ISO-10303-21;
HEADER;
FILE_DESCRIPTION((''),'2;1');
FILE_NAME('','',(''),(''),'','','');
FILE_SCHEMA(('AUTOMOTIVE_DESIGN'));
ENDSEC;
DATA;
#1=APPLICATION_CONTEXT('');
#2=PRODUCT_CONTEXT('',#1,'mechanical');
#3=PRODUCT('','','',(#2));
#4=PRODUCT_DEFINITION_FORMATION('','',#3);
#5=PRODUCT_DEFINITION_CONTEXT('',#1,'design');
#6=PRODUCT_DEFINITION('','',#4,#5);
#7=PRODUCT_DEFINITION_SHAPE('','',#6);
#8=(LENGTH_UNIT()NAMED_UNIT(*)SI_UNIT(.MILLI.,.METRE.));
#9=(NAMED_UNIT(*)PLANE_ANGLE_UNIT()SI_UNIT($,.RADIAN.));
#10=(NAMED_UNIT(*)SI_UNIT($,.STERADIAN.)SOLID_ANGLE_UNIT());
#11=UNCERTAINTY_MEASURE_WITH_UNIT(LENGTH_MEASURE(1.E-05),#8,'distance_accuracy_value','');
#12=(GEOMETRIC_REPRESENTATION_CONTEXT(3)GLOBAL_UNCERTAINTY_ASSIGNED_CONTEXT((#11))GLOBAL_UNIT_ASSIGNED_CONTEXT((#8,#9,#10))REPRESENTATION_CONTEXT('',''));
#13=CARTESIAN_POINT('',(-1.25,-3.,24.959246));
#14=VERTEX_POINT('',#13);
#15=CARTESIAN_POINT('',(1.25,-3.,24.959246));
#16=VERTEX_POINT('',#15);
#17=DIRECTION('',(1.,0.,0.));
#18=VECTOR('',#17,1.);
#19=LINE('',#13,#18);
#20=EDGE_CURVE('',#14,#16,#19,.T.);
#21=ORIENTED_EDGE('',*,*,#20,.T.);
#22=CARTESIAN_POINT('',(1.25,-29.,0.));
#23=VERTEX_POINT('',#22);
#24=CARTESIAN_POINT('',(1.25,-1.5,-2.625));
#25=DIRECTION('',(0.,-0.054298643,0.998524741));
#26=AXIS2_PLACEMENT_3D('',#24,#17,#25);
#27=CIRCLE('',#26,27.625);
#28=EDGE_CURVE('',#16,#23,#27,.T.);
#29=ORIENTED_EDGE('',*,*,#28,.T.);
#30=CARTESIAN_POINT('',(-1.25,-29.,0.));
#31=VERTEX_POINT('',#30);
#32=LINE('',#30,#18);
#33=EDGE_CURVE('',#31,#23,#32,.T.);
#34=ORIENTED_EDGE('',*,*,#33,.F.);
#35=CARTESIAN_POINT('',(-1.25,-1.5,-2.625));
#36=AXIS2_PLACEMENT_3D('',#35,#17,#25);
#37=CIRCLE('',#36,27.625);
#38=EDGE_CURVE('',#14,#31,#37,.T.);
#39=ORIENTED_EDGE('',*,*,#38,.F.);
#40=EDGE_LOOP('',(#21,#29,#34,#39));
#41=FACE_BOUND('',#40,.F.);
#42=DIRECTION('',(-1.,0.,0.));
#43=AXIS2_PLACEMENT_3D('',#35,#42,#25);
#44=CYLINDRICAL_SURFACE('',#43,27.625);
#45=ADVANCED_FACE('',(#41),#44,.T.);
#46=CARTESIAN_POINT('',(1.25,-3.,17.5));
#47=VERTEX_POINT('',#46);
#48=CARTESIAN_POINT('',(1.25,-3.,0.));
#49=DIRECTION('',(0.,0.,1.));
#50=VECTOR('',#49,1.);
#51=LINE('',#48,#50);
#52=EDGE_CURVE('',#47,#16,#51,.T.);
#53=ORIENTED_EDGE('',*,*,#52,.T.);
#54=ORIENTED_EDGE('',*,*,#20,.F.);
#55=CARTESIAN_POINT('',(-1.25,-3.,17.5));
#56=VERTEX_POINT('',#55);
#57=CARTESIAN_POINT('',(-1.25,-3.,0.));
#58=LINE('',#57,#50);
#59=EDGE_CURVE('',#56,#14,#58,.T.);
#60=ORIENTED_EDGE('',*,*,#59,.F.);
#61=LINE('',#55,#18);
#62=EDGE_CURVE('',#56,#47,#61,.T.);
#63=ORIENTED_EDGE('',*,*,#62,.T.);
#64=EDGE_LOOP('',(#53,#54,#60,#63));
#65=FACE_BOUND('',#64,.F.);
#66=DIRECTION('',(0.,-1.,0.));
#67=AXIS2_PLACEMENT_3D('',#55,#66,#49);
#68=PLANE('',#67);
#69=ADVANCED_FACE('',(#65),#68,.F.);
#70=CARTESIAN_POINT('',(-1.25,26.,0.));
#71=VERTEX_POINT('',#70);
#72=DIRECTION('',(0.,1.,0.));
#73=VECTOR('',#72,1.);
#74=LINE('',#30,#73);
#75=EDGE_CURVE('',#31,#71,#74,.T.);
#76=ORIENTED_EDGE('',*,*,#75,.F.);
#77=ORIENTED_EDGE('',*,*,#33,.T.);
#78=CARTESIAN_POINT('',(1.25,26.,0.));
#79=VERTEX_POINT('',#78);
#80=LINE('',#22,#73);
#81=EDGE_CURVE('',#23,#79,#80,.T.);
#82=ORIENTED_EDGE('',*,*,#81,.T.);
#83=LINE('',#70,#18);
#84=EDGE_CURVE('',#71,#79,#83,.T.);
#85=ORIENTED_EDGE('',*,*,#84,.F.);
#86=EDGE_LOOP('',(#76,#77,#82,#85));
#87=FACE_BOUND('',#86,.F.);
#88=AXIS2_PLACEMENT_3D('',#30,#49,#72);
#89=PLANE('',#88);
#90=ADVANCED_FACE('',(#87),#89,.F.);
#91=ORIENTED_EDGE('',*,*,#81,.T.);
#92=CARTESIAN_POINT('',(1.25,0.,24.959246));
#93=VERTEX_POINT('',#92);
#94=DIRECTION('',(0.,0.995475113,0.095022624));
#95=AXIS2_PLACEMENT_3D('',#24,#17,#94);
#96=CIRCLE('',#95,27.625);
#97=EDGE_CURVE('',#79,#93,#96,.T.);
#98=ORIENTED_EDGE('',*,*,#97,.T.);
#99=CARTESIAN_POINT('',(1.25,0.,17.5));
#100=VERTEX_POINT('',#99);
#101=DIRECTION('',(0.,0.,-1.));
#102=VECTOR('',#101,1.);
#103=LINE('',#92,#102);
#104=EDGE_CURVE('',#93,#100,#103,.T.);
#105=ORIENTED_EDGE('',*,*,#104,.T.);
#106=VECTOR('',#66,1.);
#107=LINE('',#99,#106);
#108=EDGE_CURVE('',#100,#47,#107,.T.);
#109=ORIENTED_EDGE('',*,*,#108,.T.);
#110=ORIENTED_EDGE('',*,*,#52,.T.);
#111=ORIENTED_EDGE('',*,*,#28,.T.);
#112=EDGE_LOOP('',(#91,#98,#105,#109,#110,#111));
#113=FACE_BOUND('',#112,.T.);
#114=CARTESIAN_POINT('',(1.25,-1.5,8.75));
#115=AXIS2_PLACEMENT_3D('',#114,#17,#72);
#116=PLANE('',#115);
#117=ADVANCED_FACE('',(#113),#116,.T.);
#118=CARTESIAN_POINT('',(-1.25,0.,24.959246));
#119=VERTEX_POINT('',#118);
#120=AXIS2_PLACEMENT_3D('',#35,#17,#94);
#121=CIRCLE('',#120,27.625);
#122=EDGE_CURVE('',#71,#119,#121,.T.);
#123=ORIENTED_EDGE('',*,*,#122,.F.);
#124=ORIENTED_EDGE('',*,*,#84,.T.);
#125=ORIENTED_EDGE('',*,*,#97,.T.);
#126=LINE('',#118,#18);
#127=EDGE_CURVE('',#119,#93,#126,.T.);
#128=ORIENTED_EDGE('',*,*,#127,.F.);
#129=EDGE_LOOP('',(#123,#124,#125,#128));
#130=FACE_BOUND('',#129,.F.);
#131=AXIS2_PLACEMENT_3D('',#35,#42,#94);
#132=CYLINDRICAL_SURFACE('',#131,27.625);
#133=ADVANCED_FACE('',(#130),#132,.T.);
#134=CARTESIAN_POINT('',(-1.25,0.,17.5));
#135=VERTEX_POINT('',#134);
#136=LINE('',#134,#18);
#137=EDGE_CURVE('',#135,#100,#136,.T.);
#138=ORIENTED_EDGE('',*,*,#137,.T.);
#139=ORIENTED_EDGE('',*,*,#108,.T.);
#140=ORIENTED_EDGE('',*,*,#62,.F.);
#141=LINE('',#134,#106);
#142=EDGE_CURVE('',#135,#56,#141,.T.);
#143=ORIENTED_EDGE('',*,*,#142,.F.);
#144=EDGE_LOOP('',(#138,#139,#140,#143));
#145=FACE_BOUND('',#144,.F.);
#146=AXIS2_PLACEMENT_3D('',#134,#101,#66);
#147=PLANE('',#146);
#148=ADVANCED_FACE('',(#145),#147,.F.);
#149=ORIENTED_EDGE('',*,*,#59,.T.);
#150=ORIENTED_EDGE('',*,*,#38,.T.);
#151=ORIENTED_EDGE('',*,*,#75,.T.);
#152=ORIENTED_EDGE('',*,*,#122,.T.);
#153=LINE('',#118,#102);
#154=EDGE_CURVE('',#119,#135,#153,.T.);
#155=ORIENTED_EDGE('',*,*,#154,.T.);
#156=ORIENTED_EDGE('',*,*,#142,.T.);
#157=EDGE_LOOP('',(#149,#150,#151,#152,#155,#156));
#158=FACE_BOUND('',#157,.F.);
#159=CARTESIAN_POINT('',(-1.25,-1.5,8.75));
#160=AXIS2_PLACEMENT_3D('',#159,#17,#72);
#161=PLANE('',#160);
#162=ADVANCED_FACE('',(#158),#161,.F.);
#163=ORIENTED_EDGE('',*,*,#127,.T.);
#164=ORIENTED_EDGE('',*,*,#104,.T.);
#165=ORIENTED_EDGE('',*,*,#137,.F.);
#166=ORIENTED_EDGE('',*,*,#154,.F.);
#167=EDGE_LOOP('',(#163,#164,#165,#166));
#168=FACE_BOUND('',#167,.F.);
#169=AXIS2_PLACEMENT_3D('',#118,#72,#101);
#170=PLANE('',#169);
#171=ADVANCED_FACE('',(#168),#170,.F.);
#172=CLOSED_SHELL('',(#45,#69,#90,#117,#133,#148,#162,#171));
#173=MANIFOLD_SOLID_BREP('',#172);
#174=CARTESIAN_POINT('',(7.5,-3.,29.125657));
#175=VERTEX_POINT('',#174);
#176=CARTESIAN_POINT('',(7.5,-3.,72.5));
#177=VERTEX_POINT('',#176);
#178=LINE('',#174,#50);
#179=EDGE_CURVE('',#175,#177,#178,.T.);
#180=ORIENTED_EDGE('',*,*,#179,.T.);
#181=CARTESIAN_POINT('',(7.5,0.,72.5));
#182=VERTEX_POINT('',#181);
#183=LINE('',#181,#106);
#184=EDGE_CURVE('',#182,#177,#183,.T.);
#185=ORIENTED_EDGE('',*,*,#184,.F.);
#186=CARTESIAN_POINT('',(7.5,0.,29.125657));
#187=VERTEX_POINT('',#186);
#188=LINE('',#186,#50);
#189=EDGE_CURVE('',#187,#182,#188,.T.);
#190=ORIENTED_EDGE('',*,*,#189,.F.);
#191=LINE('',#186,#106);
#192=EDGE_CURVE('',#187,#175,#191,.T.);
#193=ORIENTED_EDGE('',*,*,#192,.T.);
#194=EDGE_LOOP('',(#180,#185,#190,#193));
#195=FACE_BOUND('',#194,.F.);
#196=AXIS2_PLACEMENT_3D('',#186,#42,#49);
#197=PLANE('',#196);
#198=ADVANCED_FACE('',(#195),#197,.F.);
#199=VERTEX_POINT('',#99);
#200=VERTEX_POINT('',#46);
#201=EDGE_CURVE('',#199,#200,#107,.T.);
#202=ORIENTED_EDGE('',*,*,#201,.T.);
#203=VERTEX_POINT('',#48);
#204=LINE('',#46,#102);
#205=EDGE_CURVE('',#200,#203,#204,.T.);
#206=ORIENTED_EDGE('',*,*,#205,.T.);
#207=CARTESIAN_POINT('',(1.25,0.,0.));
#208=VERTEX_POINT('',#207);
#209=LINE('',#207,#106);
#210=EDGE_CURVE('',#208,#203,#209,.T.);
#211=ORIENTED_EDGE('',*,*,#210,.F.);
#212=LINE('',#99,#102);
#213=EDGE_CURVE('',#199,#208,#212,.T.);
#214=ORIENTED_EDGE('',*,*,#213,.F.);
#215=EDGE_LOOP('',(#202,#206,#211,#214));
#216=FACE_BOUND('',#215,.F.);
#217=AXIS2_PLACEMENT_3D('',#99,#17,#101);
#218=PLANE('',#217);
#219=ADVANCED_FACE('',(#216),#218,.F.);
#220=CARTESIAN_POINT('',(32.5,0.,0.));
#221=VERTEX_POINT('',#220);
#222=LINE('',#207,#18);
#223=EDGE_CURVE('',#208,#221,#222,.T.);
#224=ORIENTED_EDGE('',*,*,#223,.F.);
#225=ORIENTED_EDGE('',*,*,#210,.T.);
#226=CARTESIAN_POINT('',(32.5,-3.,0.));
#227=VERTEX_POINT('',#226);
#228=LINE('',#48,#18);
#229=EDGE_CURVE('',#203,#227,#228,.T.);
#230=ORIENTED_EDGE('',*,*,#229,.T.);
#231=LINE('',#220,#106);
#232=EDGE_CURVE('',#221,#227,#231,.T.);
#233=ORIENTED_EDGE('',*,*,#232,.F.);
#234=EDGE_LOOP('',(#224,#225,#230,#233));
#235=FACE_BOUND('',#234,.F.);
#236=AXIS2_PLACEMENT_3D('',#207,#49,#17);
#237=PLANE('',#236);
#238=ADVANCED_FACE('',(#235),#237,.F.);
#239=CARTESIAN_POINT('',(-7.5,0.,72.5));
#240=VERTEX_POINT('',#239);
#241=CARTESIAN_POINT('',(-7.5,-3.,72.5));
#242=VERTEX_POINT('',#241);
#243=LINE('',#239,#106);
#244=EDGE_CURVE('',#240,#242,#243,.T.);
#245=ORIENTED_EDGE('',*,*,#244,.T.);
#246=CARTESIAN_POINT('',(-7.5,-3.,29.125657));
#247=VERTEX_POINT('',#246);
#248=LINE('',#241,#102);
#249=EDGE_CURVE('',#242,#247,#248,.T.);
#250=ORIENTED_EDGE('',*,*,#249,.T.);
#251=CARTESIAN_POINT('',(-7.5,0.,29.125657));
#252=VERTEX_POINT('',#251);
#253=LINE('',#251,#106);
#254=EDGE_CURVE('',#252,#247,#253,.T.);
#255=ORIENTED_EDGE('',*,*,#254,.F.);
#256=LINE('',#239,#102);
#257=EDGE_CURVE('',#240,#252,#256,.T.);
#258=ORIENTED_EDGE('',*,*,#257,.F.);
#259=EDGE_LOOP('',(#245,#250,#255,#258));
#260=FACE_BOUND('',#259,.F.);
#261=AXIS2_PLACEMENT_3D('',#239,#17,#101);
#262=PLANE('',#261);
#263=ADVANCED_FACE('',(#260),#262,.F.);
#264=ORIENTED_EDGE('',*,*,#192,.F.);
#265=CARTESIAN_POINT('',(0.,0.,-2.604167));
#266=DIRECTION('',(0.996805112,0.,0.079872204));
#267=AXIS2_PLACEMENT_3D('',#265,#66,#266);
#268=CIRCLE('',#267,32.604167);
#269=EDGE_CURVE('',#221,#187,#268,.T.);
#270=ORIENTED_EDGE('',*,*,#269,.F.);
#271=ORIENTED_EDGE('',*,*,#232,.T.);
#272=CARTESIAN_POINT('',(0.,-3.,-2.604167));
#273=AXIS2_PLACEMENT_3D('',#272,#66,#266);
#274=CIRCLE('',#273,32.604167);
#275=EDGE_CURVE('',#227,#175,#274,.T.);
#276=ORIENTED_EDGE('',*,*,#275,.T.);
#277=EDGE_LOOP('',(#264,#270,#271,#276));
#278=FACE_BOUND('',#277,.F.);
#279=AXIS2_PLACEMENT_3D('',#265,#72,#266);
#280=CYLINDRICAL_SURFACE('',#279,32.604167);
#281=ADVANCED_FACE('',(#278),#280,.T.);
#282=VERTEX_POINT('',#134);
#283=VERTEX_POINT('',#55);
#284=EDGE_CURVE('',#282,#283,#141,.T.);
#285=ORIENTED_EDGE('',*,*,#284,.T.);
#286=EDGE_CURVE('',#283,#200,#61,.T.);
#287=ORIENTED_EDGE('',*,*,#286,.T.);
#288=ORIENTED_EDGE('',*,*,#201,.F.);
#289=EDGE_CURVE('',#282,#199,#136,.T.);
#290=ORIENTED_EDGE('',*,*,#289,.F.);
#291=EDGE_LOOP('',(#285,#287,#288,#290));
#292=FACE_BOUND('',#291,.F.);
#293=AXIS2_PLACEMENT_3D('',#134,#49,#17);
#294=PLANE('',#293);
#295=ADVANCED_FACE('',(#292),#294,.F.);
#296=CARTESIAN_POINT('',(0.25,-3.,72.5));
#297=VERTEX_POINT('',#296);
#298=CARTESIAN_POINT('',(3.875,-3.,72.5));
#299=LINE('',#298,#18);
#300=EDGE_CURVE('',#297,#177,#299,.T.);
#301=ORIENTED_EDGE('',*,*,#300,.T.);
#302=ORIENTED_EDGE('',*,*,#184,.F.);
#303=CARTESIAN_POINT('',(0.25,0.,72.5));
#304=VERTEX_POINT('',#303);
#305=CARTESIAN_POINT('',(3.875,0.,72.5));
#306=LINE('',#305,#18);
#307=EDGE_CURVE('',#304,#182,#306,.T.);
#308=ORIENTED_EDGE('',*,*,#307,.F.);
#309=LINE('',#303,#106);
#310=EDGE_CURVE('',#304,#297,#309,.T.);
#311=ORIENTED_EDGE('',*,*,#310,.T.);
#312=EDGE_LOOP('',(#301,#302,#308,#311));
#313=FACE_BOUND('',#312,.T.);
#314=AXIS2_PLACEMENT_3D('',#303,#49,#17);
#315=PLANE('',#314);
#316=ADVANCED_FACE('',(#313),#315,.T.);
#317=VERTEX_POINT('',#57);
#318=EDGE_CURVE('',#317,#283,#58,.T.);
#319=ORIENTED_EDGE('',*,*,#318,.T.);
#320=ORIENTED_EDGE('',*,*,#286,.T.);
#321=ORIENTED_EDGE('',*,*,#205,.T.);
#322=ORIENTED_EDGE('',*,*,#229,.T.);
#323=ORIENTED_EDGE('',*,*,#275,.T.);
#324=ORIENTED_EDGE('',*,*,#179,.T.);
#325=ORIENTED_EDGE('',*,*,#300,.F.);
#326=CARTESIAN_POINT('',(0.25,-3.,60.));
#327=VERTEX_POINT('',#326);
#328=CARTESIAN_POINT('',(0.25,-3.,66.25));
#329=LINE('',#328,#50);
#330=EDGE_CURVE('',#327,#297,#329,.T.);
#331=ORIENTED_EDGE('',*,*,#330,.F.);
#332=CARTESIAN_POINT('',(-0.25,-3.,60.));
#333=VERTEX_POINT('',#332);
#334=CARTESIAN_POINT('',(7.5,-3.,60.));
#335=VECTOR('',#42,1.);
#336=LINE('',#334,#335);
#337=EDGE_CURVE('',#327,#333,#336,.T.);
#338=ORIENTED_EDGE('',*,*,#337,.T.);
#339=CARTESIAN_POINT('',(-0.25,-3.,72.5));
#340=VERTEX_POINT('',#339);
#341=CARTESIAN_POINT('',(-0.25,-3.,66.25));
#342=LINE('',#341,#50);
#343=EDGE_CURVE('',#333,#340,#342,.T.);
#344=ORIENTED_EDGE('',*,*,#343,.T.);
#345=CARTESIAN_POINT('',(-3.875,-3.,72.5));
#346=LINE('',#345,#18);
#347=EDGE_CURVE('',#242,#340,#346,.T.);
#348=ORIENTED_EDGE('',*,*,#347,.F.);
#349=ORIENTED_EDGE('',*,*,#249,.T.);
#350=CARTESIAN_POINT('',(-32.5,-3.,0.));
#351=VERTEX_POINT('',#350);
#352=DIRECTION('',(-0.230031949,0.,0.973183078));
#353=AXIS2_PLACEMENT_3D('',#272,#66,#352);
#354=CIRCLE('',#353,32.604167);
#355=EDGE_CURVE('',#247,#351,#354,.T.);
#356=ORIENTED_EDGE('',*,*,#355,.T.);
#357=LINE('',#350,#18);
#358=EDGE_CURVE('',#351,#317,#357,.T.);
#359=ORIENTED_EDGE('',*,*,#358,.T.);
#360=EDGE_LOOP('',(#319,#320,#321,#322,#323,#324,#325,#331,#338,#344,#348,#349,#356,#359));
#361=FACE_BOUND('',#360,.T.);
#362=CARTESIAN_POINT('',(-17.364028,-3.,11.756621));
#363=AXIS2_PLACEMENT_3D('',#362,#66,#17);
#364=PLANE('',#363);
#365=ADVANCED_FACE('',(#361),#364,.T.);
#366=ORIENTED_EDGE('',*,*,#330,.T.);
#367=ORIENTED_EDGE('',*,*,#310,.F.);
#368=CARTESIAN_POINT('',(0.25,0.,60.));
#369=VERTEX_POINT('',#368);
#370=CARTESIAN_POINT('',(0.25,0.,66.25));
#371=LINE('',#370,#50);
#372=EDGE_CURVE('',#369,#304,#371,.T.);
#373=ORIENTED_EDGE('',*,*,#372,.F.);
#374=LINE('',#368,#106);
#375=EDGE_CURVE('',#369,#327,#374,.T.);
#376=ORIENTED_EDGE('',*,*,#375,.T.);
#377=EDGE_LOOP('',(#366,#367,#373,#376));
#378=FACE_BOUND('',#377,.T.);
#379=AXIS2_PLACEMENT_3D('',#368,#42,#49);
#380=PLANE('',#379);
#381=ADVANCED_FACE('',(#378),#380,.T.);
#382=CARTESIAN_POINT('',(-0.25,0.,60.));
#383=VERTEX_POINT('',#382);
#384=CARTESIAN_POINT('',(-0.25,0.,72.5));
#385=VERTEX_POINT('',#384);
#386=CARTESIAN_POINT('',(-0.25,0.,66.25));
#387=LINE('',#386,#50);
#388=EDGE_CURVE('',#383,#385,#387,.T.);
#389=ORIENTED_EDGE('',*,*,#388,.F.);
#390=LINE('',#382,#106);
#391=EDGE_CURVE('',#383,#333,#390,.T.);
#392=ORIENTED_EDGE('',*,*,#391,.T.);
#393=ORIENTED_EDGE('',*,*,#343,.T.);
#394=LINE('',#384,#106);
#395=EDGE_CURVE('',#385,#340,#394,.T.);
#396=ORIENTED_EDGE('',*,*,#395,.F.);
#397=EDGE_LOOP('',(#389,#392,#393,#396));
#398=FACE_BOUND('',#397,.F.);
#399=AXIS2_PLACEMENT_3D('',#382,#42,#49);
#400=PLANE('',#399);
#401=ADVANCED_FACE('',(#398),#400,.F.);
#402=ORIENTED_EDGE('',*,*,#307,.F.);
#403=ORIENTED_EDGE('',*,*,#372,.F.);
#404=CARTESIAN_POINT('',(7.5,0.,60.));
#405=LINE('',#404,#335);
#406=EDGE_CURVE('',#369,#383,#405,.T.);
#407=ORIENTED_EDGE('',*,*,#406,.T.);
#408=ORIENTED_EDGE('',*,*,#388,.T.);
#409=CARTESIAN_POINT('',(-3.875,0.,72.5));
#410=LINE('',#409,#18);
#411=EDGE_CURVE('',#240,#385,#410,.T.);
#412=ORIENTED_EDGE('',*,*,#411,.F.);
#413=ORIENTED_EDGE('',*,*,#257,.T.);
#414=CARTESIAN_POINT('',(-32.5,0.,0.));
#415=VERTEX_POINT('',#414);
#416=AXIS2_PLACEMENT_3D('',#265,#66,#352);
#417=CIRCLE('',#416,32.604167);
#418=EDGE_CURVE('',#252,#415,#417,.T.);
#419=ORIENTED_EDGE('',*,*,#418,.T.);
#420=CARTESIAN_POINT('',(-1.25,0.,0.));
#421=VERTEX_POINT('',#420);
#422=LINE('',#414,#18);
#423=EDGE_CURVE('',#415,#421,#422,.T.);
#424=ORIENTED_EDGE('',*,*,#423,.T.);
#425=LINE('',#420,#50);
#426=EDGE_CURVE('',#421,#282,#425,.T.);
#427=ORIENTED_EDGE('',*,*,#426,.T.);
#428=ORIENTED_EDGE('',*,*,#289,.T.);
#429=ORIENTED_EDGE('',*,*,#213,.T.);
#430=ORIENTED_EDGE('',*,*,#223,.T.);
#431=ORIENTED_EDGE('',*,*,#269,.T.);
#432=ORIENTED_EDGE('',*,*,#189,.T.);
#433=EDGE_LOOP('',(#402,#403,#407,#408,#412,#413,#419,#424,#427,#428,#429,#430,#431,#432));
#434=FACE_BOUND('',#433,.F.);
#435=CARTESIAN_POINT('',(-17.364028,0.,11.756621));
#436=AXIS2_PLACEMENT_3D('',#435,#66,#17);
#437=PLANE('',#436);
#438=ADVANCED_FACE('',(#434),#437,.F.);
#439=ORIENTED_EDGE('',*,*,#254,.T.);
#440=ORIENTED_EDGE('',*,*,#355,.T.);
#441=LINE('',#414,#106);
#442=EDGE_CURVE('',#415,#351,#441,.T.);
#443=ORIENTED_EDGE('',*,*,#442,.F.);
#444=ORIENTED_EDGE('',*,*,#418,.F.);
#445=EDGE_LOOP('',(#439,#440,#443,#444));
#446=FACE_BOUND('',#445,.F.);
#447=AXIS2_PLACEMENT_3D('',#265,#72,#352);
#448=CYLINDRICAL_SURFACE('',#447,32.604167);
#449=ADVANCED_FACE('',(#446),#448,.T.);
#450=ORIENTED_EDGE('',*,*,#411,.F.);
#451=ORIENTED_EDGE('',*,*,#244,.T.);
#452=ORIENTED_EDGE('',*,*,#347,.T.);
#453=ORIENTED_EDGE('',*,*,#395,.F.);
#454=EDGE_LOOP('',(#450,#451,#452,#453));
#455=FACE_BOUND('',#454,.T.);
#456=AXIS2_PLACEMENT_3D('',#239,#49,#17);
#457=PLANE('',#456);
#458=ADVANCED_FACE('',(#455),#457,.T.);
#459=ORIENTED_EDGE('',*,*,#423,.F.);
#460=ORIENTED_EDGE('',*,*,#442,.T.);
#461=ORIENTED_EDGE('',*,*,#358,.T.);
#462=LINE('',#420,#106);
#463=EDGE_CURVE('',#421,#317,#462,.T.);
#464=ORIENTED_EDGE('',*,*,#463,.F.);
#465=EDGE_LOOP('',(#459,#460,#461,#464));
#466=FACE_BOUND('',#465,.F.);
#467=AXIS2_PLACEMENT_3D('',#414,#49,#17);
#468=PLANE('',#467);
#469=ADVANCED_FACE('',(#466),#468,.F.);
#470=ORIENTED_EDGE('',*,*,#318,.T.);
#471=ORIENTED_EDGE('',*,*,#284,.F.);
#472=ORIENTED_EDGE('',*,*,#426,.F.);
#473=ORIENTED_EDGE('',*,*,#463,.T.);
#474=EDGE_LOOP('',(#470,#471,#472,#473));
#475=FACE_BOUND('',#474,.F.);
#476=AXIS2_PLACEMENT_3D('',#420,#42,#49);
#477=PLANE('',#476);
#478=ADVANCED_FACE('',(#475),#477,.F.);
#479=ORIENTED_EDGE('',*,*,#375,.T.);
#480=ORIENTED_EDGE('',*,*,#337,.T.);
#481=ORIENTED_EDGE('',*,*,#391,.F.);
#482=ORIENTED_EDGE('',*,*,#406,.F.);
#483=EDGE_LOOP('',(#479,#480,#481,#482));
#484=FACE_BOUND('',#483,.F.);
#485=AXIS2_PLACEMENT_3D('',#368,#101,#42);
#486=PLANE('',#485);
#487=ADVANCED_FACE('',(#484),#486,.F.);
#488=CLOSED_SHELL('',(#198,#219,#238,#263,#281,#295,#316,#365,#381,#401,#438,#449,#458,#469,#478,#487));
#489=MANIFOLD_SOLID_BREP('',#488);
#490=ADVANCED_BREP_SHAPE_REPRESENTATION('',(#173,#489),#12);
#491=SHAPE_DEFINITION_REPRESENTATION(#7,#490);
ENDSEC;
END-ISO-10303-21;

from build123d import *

# Parameters (mm, degrees)
F0_W     = 7.25
F0_H     = 12.5
F1_DEPTH = 3
F3_DEPTH = 2.5


with BuildPart() as f1:
    # F0 (on Front) → F1 (new body)
    with BuildSketch(Plane.XZ):
        with BuildLine():
            ThreePointArc((-7.5, 29.125656592), (-24.7401691178, 18.6315512644), (-32.5, 0))
            Line((-32.5, 0), (-7.5, 0))
            Line((-7.5, 0), (-7.5, 29.125656592))
        make_face()
        with BuildLine():
            Line((-7.5, 29.125656592), (-7.5, 0))
            Line((-7.5, 0), (-1.25, 0))
            Line((-1.25, 0), (-1.25, 17.5))
            Line((-1.25, 17.5), (0, 17.5))
            Line((0, 17.5), (0, 30))
            ThreePointArc((0, 30), (-3.7753965485, 29.7806764691), (-7.5, 29.125656592))
        make_face()
        with BuildLine():
            Line((-7.5, 60), (-7.5, 29.125656592))
            ThreePointArc((-7.5, 29.125656592), (-3.7753965485, 29.7806764691), (0, 30))
            ThreePointArc((0, 30), (3.7753965485, 29.7806764691), (7.5, 29.125656592))
            Line((7.5, 29.125656592), (7.5, 60))
            Line((7.5, 60), (0.25, 60))
            Line((0.25, 60), (-0.25, 60))
            Line((-0.25, 60), (-7.5, 60))
        make_face()
        with BuildLine():
            ThreePointArc((7.5, 29.125656592), (3.7753965485, 29.7806764691), (0, 30))
            Line((0, 30), (0, 17.5))
            Line((0, 17.5), (1.25, 17.5))
            Line((1.25, 17.5), (1.25, 0))
            Line((1.25, 0), (7.5, 0))
            Line((7.5, 0), (7.5, 29.125656592))
        make_face()
        with Locations((-3.875, 66.25)):
            Rectangle(F0_W, F0_H)
        with BuildLine():
            ThreePointArc((32.5, 0), (24.7401691178, 18.6315512644), (7.5, 29.125656592))
            Line((7.5, 29.125656592), (7.5, 0))
            Line((7.5, 0), (32.5, 0))
        make_face()
        with Locations((3.875, 66.25)):
            Rectangle(F0_W, F0_H)
    extrude(amount=F1_DEPTH)


with BuildPart() as f3:
    # F2 (on face) → F3 (new body)
    with BuildSketch(Plane.YZ.offset(-1.25)):
        Polygon((-3, 17.5), (-3, 0), (-1.5, 0), (0, 0), (0, 17.5), align=None)
        with BuildLine():
            Line((-29, 0), (-3, 0))
            Line((-3, 0), (-3, 17.5))
            Line((-3, 17.5), (-3, 24.9592459567))
            ThreePointArc((-3, 24.9592459567), (-20.6308909798, 17.3036134821), (-29, 0))
        make_face()
        with BuildLine():
            Line((0, 24.9592459567), (0, 17.5))
            Line((0, 17.5), (0, 0))
            Line((0, 0), (26, 0))
            ThreePointArc((26, 0), (17.6308909798, 17.3036134821), (0, 24.9592459567))
        make_face()
    extrude(amount=F3_DEPTH)


solid = Compound([f1.part, f3.part])
